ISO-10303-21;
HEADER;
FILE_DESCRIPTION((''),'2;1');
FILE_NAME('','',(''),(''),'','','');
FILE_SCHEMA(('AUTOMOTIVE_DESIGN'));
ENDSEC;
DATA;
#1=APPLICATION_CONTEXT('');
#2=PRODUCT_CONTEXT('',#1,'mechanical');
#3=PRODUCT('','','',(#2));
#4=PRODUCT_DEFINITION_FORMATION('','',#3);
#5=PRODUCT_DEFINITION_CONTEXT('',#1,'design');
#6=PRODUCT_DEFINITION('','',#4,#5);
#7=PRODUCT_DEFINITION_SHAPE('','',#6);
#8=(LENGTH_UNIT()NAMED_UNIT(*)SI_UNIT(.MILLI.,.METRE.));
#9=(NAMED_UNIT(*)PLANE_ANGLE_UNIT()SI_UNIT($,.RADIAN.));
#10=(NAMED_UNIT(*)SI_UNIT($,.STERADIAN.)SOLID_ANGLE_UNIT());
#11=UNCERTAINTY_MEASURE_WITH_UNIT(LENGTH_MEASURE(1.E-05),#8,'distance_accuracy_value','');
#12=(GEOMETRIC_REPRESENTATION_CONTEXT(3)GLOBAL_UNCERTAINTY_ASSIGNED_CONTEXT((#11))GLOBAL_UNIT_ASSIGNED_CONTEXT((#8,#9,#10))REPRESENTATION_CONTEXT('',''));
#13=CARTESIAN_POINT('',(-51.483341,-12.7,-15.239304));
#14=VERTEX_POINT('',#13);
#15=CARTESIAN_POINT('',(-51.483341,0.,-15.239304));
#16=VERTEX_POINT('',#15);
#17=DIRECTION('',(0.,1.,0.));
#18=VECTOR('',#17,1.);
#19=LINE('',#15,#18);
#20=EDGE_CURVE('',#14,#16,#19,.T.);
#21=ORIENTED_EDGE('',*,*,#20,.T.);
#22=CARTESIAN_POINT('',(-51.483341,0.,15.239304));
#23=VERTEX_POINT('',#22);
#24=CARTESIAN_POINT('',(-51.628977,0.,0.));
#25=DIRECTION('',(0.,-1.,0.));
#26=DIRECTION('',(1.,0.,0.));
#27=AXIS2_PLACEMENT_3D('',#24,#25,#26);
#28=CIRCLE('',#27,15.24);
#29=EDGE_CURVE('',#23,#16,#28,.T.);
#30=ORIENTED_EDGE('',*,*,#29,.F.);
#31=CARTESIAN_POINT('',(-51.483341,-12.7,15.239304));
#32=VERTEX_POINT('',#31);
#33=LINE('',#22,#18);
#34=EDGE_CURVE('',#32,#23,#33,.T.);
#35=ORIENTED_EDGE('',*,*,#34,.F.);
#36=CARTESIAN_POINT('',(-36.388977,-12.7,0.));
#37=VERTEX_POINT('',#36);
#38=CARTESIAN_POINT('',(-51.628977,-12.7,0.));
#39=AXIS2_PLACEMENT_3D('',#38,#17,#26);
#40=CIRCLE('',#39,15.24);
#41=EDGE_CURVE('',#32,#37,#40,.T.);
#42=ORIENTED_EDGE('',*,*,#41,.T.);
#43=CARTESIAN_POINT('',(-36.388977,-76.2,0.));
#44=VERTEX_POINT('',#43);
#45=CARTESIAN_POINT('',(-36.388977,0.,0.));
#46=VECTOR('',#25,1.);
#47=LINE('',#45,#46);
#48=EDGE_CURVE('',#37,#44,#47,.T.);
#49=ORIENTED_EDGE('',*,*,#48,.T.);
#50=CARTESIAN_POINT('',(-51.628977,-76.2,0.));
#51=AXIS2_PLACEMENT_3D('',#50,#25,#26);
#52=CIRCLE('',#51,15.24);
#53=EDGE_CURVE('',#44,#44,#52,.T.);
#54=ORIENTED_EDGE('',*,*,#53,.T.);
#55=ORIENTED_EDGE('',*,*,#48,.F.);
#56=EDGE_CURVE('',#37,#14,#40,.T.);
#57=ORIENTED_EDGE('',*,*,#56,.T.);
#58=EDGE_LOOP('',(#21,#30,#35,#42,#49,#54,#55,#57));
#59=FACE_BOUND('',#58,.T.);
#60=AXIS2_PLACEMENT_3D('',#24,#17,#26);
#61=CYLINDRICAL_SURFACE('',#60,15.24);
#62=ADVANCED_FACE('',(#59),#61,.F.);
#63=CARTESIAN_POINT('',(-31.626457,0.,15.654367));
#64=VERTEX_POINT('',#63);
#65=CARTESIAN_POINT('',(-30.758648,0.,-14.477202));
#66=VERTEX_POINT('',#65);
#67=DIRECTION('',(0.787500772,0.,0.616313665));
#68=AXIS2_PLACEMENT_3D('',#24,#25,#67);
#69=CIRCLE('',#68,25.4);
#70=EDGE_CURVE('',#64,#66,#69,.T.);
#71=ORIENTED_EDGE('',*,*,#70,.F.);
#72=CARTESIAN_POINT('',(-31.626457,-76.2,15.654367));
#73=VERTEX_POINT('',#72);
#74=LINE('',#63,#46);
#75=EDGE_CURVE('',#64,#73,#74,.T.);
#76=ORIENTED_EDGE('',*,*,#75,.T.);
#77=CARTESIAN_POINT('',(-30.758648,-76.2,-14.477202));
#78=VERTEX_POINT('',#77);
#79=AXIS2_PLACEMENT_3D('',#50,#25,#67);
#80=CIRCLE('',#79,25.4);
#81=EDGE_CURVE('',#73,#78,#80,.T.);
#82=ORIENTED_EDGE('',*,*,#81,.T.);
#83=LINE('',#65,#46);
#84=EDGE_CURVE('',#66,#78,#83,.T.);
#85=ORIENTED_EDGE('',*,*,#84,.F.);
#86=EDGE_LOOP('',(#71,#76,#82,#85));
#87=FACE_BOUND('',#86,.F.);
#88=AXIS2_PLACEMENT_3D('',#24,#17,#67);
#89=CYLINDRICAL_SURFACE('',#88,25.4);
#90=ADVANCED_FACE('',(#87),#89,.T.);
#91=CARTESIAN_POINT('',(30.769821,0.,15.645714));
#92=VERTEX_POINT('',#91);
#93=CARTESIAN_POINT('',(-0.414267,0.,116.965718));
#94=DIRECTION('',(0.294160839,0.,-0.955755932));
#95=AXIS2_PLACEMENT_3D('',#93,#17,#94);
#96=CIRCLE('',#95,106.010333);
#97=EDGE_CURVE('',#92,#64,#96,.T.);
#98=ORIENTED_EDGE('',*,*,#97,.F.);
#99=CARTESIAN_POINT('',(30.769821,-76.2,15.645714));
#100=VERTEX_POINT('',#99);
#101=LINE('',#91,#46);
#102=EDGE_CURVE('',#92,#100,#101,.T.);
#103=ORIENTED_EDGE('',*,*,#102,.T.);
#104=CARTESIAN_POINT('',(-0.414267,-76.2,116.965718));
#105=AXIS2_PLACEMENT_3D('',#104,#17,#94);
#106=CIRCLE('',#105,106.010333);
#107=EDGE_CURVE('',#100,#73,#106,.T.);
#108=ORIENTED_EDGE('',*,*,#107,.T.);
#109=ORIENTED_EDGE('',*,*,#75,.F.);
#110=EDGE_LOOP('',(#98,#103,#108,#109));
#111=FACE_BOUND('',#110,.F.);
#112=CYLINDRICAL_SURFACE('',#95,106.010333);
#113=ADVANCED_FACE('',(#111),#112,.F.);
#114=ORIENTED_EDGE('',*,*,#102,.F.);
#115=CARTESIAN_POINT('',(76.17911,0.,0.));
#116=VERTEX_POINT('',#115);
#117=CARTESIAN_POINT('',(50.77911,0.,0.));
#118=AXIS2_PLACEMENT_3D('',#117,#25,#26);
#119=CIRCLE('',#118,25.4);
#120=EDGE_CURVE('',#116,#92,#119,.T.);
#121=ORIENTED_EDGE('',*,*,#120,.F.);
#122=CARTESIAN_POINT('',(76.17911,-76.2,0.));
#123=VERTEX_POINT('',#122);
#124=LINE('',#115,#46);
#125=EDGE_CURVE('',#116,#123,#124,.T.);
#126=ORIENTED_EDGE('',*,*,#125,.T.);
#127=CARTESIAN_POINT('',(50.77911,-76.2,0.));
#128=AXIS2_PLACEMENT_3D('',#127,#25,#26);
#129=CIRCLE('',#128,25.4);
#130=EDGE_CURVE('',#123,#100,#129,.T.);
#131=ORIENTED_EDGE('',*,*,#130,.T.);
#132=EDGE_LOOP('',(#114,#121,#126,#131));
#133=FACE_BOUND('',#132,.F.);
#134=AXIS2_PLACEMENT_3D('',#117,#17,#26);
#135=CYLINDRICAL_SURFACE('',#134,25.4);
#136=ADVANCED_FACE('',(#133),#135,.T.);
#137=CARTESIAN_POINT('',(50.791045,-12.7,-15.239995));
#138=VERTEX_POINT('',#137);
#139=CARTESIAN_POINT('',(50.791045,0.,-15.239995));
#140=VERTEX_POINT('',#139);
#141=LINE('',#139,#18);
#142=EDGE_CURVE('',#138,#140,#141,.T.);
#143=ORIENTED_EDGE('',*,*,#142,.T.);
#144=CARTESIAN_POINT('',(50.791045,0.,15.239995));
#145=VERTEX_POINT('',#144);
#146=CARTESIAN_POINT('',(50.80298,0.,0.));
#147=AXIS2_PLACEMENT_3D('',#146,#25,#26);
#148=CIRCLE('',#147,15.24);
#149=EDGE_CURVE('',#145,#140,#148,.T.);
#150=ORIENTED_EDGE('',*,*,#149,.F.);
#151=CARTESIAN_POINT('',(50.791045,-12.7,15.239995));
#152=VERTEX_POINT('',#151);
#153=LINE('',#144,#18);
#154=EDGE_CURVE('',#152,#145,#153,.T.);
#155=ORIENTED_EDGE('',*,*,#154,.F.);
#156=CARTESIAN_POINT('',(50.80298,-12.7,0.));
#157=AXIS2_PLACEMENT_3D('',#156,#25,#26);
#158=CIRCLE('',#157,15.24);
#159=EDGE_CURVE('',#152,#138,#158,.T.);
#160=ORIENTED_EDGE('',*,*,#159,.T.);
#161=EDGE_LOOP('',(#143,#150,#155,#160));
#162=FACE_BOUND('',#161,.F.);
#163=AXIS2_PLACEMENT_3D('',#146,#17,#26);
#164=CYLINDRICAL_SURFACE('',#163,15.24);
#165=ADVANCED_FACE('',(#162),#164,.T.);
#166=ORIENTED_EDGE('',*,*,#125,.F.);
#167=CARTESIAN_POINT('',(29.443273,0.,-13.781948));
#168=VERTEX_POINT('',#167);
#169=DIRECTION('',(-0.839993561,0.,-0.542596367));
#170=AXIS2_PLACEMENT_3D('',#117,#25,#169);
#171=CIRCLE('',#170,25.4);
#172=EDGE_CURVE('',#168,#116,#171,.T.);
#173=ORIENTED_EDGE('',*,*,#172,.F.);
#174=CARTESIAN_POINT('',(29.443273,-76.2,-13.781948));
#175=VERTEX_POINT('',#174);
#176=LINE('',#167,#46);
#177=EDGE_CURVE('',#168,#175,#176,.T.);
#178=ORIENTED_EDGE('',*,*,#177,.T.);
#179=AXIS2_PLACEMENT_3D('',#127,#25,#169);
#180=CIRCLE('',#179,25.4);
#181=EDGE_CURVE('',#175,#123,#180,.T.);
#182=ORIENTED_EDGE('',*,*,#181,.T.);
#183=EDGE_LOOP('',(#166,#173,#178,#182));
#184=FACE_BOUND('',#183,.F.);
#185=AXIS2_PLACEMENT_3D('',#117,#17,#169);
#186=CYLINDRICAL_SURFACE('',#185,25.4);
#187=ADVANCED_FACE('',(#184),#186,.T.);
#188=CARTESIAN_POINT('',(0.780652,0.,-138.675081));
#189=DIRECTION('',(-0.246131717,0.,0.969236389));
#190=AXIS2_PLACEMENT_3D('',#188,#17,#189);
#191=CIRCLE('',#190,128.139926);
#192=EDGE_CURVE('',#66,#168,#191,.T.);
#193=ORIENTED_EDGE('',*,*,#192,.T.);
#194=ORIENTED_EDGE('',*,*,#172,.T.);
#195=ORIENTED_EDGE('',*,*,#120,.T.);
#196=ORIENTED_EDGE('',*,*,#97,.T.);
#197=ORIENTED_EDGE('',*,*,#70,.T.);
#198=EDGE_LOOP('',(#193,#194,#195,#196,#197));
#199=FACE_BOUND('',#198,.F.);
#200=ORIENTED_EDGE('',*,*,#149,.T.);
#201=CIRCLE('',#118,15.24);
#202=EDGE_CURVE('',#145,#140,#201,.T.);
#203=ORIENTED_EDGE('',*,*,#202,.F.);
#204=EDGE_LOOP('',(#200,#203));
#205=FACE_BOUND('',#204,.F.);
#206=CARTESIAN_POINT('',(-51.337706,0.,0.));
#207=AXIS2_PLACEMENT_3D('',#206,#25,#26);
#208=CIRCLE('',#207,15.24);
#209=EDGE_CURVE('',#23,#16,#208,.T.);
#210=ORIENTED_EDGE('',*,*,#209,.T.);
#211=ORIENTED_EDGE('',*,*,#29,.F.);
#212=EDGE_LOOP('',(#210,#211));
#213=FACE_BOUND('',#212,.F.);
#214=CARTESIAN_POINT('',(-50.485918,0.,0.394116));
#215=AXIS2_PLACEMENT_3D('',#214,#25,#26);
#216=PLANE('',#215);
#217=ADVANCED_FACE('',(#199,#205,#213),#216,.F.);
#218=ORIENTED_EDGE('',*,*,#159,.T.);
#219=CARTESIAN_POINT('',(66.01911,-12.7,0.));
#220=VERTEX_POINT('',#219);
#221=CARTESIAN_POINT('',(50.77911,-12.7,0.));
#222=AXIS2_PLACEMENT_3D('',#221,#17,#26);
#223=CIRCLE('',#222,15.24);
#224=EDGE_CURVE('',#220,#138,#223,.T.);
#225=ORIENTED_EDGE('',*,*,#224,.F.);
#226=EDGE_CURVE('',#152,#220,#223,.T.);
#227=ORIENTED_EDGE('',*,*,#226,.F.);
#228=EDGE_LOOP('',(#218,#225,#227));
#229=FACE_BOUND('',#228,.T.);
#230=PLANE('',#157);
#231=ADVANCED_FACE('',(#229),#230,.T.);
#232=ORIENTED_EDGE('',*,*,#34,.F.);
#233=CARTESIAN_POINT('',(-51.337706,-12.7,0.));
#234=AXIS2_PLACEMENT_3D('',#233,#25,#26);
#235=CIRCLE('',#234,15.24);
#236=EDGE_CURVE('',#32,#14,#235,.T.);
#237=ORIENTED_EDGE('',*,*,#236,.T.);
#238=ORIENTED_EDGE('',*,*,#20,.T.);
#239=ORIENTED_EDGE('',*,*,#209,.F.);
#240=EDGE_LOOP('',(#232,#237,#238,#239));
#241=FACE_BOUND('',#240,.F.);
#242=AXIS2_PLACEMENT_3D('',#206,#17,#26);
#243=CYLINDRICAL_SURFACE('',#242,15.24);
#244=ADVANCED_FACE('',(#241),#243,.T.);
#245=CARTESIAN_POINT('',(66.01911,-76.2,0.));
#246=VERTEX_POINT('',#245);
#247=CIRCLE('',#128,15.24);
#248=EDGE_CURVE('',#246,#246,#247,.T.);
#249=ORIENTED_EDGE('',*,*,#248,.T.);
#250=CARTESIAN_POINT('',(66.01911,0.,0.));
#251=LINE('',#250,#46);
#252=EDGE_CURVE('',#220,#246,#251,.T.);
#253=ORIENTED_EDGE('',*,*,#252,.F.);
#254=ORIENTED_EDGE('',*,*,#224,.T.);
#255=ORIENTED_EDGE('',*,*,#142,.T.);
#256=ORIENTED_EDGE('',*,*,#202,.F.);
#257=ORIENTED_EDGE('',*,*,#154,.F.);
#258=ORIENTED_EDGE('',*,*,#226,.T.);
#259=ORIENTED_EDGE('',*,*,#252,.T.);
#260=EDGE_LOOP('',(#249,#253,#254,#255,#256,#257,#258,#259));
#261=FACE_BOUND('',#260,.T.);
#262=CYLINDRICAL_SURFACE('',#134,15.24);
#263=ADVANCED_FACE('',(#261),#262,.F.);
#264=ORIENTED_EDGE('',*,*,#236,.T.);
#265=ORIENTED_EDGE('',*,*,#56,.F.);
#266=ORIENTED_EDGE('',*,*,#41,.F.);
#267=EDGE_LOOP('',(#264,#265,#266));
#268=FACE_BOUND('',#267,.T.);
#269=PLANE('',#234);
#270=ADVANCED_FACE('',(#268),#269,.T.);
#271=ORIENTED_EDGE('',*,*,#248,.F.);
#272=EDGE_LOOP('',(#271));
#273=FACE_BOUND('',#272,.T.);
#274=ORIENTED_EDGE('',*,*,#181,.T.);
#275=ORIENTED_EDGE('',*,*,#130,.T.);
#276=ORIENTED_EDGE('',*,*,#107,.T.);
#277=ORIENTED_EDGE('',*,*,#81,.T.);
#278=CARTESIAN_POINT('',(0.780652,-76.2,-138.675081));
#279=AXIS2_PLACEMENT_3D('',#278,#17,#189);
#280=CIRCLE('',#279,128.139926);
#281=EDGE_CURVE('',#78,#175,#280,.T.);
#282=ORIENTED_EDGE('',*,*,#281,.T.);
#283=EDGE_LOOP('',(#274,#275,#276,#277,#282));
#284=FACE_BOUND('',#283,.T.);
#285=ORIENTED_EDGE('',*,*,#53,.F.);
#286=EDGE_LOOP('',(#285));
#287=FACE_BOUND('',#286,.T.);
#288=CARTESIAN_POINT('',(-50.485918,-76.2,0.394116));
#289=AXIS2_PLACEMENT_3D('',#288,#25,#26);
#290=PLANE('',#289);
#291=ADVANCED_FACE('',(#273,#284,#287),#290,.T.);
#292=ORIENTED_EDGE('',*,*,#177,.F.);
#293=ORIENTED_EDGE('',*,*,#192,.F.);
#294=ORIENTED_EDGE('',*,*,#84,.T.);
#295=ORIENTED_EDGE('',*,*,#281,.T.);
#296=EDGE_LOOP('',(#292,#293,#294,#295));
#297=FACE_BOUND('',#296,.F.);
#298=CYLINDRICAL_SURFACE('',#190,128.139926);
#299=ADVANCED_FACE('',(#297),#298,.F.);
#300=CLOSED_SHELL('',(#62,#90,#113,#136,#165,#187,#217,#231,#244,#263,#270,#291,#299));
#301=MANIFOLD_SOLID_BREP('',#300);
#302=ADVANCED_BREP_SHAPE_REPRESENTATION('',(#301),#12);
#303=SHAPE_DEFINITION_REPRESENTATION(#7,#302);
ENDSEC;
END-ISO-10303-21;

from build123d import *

# Parameters (mm, degrees)
F0_R     = 15.24
F1_DEPTH = 76.2
F2_R     = 15.24
F3_DEPTH = 12.7


# Not quite as in the source:
# - the program builds the solid bodies; features that only make, move or delete a surface that nothing else refers to are left out


with BuildPart() as f1:
    # F0 (on Front) → F1 (new body)
    with BuildSketch(Plane.XZ):
        with BuildLine():
            ThreePointArc((-30.7586478548, -14.4772019242), (-27.3878303212, -7.5846439713), (-26.2289766602, 0))
            ThreePointArc((-26.2289766602, 0), (-27.6162300636, 8.2793720106), (-31.6264570452, 15.6543670921))
            ThreePointArc((-31.6264570452, 15.6543670921), (-77.0184488356, -0.7312336534), (-30.7586478548, -14.4772019242))
        make_face()
        with Locations((-51.6289766602, 0)):
            Circle(F0_R, mode=Mode.SUBTRACT)
        with BuildLine():
            ThreePointArc((-31.6264570452, 15.6543670921), (-27.6162300636, 8.2793720106), (-26.2289766602, 0))
            ThreePointArc((-26.2289766602, 0), (-27.3878303212, -7.5846439713), (-30.7586478548, -14.4772019242))
            ThreePointArc((-30.7586478548, -14.4772019242), (-0.6990994055, -10.5436994312), (29.4432734756, -13.7819477124))
            ThreePointArc((29.4432734756, -13.7819477124), (25.4048776906, 1.1438261277), (30.7698211259, 15.6457138385))
            ThreePointArc((30.7698211259, 15.6457138385), (-0.4289690246, 10.9553864554), (-31.6264570452, 15.6543670921))
        make_face()
        with BuildLine():
            ThreePointArc((76.179109931, 0), (59.0532885715, 24.014536594), (30.7698211259, 15.6457138385))
            ThreePointArc((30.7698211259, 15.6457138385), (25.4048776906, 1.1438261277), (29.4432734756, -13.7819477124))
            ThreePointArc((29.4432734756, -13.7819477124), (57.9634593807, -24.3627815116), (76.179109931, 0))
        make_face()
        with Locations((50.779109931, 0)):
            Circle(F0_R, mode=Mode.SUBTRACT)
    extrude(amount=F1_DEPTH)

    # F2 (on Front) → F3 (join)
    with BuildSketch(Plane.XZ):
        with Locations((-51.3377061976, 0)):
            Circle(F2_R)
        with Locations((50.8029804159, 0)):
            Circle(F2_R)
    extrude(amount=F3_DEPTH)


solid = f1.part
